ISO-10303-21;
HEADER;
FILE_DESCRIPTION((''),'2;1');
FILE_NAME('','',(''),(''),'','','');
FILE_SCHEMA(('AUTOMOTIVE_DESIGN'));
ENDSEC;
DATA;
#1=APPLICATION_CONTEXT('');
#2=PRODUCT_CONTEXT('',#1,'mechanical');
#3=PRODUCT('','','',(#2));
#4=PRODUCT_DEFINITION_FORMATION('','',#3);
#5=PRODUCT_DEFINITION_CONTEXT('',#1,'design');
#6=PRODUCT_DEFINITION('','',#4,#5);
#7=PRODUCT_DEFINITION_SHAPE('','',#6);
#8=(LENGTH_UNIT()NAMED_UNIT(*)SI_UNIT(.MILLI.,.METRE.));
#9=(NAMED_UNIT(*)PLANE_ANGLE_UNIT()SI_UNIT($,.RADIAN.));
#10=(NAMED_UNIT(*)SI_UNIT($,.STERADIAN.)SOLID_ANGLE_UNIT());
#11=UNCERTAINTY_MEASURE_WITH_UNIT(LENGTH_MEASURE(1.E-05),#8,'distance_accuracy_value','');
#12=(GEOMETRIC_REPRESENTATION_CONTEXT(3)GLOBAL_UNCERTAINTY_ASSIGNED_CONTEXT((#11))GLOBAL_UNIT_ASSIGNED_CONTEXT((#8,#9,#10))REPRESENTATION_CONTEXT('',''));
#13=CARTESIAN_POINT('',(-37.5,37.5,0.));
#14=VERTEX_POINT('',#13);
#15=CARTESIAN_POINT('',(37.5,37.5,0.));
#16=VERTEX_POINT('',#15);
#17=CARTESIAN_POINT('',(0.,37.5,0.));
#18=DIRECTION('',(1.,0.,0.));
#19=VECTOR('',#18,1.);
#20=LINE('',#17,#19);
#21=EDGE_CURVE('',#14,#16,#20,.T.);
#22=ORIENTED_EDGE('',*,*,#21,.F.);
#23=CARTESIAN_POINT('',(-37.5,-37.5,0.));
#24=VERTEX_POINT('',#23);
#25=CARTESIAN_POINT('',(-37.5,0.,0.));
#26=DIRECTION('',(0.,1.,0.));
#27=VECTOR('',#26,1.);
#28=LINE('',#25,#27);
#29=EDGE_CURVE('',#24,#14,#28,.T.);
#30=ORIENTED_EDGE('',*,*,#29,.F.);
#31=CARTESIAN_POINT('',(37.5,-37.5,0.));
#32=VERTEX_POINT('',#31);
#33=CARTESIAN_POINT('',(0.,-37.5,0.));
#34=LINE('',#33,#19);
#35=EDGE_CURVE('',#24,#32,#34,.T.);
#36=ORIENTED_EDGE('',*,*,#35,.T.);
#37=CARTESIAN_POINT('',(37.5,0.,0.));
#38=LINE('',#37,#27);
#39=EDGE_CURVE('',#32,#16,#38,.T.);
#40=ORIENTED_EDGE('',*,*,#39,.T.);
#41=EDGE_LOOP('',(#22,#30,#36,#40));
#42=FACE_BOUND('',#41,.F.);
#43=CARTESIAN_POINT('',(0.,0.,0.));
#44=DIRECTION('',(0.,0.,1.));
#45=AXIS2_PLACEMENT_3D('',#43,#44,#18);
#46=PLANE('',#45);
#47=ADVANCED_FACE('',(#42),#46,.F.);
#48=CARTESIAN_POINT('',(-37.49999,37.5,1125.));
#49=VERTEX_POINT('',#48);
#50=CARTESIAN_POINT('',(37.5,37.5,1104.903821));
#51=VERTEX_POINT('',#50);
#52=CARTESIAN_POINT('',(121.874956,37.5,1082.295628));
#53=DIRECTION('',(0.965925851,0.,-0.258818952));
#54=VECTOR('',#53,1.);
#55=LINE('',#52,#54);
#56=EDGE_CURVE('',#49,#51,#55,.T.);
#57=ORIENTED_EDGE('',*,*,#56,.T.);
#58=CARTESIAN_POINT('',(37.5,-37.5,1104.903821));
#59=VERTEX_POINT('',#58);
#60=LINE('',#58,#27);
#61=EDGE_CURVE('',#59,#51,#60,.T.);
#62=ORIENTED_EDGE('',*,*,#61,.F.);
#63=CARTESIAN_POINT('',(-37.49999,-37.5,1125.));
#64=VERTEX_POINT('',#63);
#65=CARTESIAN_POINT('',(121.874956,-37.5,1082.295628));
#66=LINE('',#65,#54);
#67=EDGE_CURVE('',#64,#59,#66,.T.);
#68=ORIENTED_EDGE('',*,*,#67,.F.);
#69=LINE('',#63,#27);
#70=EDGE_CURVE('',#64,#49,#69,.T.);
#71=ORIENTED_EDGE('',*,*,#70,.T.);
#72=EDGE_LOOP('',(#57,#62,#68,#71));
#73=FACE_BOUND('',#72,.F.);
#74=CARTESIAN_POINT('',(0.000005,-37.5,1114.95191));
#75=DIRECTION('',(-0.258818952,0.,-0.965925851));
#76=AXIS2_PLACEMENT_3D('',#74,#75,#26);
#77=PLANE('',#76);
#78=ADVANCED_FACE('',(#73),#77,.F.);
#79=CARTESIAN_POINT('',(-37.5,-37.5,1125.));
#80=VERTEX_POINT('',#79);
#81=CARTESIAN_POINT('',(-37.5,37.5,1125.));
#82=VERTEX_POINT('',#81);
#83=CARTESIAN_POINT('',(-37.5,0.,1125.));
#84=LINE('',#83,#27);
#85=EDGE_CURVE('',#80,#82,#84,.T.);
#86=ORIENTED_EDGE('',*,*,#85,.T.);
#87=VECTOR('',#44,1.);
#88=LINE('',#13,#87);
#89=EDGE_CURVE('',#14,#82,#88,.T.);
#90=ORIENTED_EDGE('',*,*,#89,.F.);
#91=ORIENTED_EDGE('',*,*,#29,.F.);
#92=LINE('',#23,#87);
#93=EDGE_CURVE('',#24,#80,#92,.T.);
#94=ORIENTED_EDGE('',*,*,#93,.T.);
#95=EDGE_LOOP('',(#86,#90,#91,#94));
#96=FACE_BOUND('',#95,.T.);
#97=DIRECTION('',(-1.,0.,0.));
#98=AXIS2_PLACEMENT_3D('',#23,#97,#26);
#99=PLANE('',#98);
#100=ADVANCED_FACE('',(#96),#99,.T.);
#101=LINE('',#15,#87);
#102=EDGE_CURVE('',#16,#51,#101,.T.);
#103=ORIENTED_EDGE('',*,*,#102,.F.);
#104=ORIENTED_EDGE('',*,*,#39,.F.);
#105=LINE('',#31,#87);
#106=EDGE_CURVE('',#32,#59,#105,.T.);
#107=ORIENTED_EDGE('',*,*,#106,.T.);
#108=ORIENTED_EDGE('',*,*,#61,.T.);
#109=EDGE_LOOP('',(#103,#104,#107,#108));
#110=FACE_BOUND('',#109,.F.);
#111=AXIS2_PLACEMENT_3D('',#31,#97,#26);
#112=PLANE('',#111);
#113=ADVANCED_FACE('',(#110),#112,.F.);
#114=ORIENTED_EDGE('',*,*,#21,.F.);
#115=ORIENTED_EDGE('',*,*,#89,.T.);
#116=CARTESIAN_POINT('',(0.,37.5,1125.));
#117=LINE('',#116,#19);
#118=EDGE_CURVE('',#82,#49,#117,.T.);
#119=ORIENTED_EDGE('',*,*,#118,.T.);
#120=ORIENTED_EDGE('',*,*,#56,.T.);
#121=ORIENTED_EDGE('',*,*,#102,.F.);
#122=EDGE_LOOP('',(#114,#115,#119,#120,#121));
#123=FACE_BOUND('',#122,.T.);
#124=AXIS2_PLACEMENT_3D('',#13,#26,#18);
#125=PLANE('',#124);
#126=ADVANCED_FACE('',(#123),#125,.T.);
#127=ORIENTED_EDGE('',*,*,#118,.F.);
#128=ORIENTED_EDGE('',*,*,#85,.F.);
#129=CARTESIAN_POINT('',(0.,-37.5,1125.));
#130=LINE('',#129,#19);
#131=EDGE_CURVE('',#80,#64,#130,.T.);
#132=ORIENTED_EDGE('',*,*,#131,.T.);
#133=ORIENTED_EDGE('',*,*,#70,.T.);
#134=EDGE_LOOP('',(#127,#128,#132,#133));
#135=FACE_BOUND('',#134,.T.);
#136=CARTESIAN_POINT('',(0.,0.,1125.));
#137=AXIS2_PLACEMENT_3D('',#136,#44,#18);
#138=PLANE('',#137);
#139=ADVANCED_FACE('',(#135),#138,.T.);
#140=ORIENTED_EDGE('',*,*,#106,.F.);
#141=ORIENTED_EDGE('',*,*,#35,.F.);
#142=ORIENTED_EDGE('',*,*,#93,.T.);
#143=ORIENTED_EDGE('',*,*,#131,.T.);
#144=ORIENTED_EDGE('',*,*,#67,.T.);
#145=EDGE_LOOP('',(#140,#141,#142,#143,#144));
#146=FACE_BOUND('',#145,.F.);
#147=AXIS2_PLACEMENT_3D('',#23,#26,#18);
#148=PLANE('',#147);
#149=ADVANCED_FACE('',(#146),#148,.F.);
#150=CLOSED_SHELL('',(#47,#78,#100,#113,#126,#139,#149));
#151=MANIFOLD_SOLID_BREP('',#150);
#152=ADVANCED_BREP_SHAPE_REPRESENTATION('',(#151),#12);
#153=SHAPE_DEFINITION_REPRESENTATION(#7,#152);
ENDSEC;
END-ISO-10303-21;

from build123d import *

# Parameters (mm, degrees)
F0_W     = 75
F0_H     = 75
F1_DEPTH = 1125
F2_SIZE2 = 20.096179
F2_SIZE  = 74.99999


# Not quite as in the source:
# - a fillet or chamfer is up to 0.001 mm smaller than in the source, because OpenCascade refuses the exact size


with BuildPart() as f1:
    # F0 (on Top) → F1 (new body)
    with BuildSketch(Plane.XY):
        Rectangle(F0_W, F0_H)
    extrude(amount=F1_DEPTH)

    # F2 (size 75 and 20.0961894323 in the source; OpenCascade refuses exactly that, so slightly less here)
    f2_edges = [f1.edges().sort_by_distance(p)[0] for p in [
        (37.5, 0, 1125),
    ]]
    f2_side = f1.faces().sort_by_distance((0, 0, 1125))[0]
    chamfer(f2_edges, length=F2_SIZE, length2=F2_SIZE2, reference=f2_side)


solid = f1.part
